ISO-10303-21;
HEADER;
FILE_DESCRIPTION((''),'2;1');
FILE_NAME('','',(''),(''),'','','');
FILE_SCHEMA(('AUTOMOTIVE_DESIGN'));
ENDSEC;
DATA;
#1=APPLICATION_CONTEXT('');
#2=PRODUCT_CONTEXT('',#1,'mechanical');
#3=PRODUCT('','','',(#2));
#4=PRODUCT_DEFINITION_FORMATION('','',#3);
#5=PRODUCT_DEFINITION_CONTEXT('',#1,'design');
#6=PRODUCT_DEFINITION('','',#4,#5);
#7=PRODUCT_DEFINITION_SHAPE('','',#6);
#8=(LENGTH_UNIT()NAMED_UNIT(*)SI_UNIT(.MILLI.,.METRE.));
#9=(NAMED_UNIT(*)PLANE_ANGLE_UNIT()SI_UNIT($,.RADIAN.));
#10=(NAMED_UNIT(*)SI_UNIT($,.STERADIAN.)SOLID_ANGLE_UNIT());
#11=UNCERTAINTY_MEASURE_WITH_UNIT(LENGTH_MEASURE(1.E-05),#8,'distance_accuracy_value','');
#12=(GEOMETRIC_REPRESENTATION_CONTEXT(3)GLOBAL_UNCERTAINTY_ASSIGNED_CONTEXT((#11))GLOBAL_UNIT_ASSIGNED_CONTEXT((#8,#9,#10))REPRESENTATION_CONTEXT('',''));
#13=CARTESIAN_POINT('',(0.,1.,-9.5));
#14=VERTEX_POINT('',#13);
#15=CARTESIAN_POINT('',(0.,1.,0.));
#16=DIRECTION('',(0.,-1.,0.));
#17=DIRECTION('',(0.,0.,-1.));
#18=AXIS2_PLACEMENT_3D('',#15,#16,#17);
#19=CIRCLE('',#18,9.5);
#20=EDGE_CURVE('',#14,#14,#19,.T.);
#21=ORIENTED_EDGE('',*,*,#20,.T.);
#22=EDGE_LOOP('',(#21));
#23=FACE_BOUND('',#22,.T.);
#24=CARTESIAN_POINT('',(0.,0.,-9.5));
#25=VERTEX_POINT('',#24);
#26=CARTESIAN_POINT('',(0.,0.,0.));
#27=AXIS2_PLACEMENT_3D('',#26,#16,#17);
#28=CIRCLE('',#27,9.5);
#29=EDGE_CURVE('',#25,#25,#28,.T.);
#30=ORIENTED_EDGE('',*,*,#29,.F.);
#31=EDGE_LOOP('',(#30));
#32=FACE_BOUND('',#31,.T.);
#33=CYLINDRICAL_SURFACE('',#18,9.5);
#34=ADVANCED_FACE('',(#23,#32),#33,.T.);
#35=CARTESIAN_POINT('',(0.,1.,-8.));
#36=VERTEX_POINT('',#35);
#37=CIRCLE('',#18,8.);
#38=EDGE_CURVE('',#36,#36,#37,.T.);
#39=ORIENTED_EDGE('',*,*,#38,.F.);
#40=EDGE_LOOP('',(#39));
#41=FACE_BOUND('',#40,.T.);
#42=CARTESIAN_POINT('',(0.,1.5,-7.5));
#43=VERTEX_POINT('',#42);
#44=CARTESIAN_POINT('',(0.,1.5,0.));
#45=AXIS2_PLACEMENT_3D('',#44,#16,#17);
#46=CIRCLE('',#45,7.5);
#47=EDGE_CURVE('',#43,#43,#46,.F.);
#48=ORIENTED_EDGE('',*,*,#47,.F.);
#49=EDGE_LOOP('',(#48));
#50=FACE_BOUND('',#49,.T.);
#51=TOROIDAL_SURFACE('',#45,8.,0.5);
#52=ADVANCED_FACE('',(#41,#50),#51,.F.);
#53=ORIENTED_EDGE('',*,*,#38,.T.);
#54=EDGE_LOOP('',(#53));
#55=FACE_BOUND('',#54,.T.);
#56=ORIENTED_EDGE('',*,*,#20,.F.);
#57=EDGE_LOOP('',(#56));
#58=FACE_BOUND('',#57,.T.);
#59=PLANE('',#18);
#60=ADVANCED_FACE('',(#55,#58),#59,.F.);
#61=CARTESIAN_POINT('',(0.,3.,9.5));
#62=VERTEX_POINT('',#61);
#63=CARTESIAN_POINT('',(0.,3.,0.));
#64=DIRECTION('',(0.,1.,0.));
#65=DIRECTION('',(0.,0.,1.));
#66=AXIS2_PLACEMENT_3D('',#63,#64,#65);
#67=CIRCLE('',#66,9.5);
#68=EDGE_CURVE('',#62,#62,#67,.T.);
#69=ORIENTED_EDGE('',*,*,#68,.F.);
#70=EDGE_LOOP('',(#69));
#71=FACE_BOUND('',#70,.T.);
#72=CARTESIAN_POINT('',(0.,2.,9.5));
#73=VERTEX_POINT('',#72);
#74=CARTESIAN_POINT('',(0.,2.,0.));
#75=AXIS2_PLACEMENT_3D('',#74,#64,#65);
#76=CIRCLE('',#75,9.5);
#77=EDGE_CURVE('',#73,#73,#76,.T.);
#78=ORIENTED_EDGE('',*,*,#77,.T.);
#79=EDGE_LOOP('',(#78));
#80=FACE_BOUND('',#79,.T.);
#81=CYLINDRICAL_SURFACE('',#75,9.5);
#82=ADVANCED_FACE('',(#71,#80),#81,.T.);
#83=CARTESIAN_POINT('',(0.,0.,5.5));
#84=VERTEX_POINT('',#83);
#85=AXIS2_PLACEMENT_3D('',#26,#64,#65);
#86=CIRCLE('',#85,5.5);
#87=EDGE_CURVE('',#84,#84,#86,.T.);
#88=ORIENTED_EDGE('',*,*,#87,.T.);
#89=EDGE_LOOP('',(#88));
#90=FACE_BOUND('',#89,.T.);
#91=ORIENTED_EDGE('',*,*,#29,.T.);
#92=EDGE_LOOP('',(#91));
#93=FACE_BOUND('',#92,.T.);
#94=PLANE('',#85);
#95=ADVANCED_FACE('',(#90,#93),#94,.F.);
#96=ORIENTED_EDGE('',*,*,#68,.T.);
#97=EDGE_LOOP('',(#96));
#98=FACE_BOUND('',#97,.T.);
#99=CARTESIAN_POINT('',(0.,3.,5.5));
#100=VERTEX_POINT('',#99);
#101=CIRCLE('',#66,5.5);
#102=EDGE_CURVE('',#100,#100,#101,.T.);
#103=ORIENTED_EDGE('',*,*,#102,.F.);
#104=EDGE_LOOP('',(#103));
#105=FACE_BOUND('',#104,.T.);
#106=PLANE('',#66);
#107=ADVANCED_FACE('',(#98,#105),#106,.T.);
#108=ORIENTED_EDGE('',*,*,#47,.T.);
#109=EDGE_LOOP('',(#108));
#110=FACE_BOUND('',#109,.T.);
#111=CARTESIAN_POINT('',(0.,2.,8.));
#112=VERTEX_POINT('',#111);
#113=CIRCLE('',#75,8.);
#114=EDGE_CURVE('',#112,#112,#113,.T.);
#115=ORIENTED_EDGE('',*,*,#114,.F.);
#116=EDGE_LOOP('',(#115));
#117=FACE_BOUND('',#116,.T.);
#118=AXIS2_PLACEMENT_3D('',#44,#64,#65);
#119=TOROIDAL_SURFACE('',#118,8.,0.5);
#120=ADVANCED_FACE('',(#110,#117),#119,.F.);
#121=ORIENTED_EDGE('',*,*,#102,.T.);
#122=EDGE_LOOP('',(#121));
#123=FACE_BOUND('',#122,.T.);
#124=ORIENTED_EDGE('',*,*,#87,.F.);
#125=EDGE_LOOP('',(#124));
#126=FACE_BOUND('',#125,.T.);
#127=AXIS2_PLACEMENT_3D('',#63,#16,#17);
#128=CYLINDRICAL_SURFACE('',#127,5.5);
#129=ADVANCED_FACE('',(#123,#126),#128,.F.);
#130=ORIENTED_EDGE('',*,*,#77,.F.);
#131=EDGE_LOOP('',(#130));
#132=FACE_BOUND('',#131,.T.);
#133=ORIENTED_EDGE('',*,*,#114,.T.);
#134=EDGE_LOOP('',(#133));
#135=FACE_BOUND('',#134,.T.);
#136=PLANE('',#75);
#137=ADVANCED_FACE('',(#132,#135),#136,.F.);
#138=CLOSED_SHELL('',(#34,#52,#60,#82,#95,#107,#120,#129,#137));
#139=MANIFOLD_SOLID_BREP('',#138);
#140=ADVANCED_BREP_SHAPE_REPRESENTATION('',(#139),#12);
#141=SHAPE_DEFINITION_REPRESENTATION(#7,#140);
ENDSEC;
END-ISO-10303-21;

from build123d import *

# Parameters (mm, degrees)
SKETCH1_R           = 7.5
SKETCH1_R_2         = 5.5
BOSS_EXTRUDE1_DEPTH = 3
BOSS_EXTRUDE2_START = -1
SKETCH2_R           = 9.5
SKETCH2_R_2         = 7.5
BOSS_EXTRUDE2_DEPTH = 1
SKETCH3_R           = 9.5
SKETCH3_R_2         = 7.5
BOSS_EXTRUDE3_DEPTH = 1
FILLET1_R           = 0.5


with BuildPart() as part:
    # Sketch1 → Boss-Extrude1 (new body)
    with BuildSketch(Plane(origin=(0, 0, 0), x_dir=(1, 0, 0), z_dir=(0, 1, 0))):
        with Locations(Location((0, 0, 0), (0, 0, 270))):
            Circle(SKETCH1_R)
        with Locations(Location((0, 0, 0), (0, 0, 270))):
            Circle(SKETCH1_R_2, mode=Mode.SUBTRACT)
    extrude(amount=BOSS_EXTRUDE1_DEPTH)

    # Sketch2 → Boss-Extrude2 (add)
    with BuildSketch(Plane(origin=(0, 3, 0), x_dir=(1, 0, 0), z_dir=(0, 1, 0)).offset(BOSS_EXTRUDE2_START)):
        with Locations(Location((0, 0, 0), (0, 0, 270))):
            Circle(SKETCH2_R)
        with Locations(Location((0, 0, 0), (0, 0, 270))):
            Circle(SKETCH2_R_2, mode=Mode.SUBTRACT)
    extrude(amount=BOSS_EXTRUDE2_DEPTH)

    # Sketch3 → Boss-Extrude3 (add)
    with BuildSketch(Plane.XZ):
        with Locations(Location((0, 0, 0), (0, 0, 90))):
            Circle(SKETCH3_R)
        with Locations(Location((0, 0, 0), (0, 0, 270))):
            Circle(SKETCH3_R_2, mode=Mode.SUBTRACT)
    extrude(amount=-BOSS_EXTRUDE3_DEPTH)

    # Fillet1
    fillet1_edges = [part.edges().sort_by_distance(p)[0] for p in [
        (0, 2, -7.5),
        (0, 1, -7.5),
    ]]
    fillet(fillet1_edges, radius=FILLET1_R - 0.0001)  # a hair under: the kernel refuses the full size


solid = part.part
